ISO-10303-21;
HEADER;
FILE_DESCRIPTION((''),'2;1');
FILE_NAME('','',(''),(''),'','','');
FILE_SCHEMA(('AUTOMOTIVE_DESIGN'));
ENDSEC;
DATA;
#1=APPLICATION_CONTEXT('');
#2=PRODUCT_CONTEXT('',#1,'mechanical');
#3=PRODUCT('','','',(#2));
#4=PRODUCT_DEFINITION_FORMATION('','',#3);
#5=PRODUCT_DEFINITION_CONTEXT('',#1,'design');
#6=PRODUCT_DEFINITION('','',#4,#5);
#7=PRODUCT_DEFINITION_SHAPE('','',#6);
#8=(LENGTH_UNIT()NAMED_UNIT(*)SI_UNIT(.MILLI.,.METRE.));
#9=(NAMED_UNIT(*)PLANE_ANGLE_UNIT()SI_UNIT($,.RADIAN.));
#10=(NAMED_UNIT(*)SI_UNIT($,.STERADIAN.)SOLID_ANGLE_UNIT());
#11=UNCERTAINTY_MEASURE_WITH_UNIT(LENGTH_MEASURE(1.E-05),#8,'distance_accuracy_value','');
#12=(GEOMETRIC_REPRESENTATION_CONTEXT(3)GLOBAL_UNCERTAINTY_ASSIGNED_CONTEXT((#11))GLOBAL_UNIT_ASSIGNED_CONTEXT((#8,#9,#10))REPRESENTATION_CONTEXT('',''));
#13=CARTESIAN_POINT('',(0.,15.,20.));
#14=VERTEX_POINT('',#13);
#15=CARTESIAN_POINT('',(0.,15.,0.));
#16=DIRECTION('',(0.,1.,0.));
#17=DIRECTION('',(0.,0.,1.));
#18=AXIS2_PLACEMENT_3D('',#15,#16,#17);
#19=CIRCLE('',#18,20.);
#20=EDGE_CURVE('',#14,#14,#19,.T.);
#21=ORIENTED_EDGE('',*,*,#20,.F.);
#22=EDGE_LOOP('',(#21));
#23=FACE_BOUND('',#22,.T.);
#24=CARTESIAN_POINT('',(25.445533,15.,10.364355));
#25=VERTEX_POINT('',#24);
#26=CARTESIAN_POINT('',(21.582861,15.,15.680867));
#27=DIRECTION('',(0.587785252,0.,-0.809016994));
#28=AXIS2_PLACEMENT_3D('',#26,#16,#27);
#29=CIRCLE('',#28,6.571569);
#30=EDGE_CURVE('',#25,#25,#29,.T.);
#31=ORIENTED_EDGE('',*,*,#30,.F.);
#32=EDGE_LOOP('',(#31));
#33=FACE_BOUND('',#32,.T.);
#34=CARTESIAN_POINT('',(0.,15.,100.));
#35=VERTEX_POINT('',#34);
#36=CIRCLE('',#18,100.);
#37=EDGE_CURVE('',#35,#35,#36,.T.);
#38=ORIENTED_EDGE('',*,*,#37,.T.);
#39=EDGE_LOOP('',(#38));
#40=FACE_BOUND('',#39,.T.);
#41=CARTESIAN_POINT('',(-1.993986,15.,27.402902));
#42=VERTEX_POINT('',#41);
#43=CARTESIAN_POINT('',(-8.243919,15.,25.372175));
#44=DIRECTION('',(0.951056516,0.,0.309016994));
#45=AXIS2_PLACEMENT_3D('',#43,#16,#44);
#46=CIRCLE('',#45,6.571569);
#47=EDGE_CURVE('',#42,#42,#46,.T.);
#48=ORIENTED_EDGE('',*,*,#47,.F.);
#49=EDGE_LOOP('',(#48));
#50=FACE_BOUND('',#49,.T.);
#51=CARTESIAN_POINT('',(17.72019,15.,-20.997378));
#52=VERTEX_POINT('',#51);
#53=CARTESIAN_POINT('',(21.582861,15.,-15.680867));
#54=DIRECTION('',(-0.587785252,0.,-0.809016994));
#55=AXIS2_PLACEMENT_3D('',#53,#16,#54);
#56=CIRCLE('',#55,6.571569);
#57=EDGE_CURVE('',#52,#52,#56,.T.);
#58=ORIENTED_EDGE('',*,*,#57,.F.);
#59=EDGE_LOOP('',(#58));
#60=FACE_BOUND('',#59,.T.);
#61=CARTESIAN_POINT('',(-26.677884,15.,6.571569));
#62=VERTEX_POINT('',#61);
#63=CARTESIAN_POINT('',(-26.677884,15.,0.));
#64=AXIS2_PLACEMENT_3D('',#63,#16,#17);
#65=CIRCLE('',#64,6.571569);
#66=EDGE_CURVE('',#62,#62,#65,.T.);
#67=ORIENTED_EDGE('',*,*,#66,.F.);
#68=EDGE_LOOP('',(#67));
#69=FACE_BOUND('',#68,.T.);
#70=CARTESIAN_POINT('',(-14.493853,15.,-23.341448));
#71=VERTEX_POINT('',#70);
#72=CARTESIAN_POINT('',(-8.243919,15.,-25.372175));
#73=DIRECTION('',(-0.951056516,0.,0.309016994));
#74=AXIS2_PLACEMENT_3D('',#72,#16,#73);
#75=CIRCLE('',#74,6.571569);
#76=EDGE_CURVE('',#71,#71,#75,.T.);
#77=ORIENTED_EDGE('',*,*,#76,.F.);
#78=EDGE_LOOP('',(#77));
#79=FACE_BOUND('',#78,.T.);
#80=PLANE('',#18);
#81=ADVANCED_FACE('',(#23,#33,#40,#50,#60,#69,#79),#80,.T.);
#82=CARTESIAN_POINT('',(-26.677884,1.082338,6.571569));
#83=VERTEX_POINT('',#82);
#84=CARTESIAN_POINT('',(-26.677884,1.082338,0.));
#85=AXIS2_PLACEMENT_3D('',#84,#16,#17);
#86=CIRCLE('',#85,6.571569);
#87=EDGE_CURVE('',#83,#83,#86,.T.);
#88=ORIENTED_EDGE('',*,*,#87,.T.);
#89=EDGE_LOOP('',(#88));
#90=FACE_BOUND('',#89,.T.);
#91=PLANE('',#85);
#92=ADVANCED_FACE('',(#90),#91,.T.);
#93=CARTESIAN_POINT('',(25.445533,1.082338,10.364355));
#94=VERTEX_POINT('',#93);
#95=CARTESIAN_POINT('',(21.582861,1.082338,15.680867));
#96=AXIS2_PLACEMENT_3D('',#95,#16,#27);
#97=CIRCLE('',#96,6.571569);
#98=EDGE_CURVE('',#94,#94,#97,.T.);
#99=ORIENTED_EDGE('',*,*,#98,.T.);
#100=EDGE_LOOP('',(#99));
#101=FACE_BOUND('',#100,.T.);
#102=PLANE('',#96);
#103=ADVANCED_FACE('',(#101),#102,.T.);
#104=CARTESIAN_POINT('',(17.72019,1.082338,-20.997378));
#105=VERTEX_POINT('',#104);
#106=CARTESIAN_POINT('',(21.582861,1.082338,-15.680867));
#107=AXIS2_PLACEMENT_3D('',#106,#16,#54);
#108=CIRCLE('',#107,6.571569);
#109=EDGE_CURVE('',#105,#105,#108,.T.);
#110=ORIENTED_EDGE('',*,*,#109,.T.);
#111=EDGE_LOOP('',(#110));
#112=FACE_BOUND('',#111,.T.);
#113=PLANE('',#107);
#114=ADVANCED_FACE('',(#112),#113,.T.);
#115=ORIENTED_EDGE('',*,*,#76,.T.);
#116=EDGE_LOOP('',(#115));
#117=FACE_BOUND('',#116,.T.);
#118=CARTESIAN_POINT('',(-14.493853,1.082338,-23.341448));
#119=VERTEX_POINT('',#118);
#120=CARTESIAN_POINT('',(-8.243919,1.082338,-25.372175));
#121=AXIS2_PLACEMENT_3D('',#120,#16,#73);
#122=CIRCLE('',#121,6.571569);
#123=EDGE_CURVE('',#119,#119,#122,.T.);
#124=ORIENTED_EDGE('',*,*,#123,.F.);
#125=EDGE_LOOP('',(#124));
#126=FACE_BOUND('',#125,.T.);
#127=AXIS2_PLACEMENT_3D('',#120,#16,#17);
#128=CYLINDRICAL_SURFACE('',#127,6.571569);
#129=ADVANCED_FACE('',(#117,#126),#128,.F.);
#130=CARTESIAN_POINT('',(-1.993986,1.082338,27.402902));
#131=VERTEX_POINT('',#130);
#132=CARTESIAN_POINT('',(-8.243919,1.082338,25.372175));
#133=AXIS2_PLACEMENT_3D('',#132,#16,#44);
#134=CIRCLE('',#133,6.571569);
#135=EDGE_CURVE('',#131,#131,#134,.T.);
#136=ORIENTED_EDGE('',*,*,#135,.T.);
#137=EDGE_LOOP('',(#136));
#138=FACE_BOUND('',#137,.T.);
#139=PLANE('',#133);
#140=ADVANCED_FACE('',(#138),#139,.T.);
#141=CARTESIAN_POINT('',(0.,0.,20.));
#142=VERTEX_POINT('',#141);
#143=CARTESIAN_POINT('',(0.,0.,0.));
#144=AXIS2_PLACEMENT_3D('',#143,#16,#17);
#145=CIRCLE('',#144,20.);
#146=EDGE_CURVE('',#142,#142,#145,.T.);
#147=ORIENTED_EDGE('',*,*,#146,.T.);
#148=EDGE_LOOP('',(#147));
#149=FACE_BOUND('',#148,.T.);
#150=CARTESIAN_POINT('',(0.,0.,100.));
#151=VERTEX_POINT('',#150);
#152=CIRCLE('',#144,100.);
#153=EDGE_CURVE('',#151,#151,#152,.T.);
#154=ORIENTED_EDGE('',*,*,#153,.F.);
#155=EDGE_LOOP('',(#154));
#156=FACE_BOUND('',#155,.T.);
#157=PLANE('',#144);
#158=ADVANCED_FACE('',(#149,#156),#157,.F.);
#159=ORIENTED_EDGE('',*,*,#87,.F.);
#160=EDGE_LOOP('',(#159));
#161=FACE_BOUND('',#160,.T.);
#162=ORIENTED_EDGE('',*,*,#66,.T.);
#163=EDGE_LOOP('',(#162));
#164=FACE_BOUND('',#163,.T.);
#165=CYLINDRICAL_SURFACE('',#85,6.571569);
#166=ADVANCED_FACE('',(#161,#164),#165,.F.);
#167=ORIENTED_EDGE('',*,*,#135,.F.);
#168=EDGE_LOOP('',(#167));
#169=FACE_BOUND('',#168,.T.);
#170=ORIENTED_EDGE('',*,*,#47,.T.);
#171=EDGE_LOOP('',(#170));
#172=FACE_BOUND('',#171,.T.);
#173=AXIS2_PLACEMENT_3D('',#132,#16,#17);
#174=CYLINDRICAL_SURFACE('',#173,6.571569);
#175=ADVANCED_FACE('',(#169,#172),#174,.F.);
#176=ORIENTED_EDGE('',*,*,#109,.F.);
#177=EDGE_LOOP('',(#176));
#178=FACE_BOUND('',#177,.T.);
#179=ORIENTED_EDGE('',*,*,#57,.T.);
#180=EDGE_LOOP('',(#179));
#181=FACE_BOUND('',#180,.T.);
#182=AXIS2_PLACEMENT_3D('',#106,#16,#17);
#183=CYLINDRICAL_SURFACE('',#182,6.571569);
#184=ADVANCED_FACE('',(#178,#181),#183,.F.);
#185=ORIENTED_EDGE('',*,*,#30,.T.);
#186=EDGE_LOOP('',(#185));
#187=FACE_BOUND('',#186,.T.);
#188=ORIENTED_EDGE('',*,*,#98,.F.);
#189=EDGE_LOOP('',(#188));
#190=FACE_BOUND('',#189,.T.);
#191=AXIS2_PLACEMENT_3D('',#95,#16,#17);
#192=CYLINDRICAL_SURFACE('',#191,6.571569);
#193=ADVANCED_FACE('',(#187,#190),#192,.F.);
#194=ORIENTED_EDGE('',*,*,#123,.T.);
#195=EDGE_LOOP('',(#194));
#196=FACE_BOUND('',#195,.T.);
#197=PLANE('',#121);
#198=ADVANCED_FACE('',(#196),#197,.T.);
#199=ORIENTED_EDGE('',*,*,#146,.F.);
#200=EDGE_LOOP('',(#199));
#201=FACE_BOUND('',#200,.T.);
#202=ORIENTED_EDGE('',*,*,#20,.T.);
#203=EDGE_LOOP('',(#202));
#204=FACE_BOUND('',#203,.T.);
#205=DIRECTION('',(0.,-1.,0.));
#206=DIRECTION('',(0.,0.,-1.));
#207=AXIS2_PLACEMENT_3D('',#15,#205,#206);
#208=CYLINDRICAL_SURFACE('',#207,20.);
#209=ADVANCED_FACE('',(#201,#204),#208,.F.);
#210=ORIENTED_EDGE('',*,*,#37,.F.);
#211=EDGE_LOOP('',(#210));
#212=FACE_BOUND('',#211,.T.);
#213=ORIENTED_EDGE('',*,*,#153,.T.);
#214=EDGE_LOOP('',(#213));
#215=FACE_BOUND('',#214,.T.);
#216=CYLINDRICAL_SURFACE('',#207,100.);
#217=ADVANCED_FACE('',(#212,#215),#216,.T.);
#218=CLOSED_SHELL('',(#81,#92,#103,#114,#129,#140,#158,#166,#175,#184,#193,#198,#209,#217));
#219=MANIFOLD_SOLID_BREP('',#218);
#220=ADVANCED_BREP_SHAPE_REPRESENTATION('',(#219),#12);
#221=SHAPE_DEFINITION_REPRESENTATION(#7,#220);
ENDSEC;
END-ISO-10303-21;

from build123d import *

# Parameters (mm, degrees)
SKETCH1_R           = 100
BOSS_EXTRUDE1_DEPTH = 15
SKETCH2_R           = 20
CUT_EXTRUDE1_DEPTH  = 143.214626533
SKETCH3_R           = 6.571569407
CUT_EXTRUDE2_DEPTH  = 13.917661723
CIRPATTERN1_COUNT   = 5


with BuildPart() as part:
    # Sketch1 → Boss-Extrude1 (new body)
    with BuildSketch(Plane(origin=(0, 0, 0), x_dir=(1, 0, 0), z_dir=(0, 1, 0))):
        Circle(SKETCH1_R)
    extrude(amount=BOSS_EXTRUDE1_DEPTH)

    # Sketch2 → Cut-Extrude1 (cut, through all)
    with BuildSketch(Plane(origin=(0, 0, 0), x_dir=(1, 0, 0), z_dir=(0, 1, 0))):
        Circle(SKETCH2_R)
    extrude(amount=CUT_EXTRUDE1_DEPTH, mode=Mode.SUBTRACT)

    # Sketch3 → Cut-Extrude2 (cut)
    with BuildSketch(Plane(origin=(0, 15, 0), x_dir=(1, 0, 0), z_dir=(0, 1, 0))):
        with Locations((-26.677883636, 0)):
            Circle(SKETCH3_R)
    cut_extrude2 = extrude(amount=-CUT_EXTRUDE2_DEPTH, mode=Mode.SUBTRACT)

    # CirPattern1: Cut-Extrude2 ×5 about axis
    cirpattern1_axis = Axis((0, 0, 0), (0, 1, 0))
    for i in range(1, CIRPATTERN1_COUNT):
        add(cut_extrude2.rotate(cirpattern1_axis, i * 360 / CIRPATTERN1_COUNT), mode=Mode.SUBTRACT)


solid = part.part
